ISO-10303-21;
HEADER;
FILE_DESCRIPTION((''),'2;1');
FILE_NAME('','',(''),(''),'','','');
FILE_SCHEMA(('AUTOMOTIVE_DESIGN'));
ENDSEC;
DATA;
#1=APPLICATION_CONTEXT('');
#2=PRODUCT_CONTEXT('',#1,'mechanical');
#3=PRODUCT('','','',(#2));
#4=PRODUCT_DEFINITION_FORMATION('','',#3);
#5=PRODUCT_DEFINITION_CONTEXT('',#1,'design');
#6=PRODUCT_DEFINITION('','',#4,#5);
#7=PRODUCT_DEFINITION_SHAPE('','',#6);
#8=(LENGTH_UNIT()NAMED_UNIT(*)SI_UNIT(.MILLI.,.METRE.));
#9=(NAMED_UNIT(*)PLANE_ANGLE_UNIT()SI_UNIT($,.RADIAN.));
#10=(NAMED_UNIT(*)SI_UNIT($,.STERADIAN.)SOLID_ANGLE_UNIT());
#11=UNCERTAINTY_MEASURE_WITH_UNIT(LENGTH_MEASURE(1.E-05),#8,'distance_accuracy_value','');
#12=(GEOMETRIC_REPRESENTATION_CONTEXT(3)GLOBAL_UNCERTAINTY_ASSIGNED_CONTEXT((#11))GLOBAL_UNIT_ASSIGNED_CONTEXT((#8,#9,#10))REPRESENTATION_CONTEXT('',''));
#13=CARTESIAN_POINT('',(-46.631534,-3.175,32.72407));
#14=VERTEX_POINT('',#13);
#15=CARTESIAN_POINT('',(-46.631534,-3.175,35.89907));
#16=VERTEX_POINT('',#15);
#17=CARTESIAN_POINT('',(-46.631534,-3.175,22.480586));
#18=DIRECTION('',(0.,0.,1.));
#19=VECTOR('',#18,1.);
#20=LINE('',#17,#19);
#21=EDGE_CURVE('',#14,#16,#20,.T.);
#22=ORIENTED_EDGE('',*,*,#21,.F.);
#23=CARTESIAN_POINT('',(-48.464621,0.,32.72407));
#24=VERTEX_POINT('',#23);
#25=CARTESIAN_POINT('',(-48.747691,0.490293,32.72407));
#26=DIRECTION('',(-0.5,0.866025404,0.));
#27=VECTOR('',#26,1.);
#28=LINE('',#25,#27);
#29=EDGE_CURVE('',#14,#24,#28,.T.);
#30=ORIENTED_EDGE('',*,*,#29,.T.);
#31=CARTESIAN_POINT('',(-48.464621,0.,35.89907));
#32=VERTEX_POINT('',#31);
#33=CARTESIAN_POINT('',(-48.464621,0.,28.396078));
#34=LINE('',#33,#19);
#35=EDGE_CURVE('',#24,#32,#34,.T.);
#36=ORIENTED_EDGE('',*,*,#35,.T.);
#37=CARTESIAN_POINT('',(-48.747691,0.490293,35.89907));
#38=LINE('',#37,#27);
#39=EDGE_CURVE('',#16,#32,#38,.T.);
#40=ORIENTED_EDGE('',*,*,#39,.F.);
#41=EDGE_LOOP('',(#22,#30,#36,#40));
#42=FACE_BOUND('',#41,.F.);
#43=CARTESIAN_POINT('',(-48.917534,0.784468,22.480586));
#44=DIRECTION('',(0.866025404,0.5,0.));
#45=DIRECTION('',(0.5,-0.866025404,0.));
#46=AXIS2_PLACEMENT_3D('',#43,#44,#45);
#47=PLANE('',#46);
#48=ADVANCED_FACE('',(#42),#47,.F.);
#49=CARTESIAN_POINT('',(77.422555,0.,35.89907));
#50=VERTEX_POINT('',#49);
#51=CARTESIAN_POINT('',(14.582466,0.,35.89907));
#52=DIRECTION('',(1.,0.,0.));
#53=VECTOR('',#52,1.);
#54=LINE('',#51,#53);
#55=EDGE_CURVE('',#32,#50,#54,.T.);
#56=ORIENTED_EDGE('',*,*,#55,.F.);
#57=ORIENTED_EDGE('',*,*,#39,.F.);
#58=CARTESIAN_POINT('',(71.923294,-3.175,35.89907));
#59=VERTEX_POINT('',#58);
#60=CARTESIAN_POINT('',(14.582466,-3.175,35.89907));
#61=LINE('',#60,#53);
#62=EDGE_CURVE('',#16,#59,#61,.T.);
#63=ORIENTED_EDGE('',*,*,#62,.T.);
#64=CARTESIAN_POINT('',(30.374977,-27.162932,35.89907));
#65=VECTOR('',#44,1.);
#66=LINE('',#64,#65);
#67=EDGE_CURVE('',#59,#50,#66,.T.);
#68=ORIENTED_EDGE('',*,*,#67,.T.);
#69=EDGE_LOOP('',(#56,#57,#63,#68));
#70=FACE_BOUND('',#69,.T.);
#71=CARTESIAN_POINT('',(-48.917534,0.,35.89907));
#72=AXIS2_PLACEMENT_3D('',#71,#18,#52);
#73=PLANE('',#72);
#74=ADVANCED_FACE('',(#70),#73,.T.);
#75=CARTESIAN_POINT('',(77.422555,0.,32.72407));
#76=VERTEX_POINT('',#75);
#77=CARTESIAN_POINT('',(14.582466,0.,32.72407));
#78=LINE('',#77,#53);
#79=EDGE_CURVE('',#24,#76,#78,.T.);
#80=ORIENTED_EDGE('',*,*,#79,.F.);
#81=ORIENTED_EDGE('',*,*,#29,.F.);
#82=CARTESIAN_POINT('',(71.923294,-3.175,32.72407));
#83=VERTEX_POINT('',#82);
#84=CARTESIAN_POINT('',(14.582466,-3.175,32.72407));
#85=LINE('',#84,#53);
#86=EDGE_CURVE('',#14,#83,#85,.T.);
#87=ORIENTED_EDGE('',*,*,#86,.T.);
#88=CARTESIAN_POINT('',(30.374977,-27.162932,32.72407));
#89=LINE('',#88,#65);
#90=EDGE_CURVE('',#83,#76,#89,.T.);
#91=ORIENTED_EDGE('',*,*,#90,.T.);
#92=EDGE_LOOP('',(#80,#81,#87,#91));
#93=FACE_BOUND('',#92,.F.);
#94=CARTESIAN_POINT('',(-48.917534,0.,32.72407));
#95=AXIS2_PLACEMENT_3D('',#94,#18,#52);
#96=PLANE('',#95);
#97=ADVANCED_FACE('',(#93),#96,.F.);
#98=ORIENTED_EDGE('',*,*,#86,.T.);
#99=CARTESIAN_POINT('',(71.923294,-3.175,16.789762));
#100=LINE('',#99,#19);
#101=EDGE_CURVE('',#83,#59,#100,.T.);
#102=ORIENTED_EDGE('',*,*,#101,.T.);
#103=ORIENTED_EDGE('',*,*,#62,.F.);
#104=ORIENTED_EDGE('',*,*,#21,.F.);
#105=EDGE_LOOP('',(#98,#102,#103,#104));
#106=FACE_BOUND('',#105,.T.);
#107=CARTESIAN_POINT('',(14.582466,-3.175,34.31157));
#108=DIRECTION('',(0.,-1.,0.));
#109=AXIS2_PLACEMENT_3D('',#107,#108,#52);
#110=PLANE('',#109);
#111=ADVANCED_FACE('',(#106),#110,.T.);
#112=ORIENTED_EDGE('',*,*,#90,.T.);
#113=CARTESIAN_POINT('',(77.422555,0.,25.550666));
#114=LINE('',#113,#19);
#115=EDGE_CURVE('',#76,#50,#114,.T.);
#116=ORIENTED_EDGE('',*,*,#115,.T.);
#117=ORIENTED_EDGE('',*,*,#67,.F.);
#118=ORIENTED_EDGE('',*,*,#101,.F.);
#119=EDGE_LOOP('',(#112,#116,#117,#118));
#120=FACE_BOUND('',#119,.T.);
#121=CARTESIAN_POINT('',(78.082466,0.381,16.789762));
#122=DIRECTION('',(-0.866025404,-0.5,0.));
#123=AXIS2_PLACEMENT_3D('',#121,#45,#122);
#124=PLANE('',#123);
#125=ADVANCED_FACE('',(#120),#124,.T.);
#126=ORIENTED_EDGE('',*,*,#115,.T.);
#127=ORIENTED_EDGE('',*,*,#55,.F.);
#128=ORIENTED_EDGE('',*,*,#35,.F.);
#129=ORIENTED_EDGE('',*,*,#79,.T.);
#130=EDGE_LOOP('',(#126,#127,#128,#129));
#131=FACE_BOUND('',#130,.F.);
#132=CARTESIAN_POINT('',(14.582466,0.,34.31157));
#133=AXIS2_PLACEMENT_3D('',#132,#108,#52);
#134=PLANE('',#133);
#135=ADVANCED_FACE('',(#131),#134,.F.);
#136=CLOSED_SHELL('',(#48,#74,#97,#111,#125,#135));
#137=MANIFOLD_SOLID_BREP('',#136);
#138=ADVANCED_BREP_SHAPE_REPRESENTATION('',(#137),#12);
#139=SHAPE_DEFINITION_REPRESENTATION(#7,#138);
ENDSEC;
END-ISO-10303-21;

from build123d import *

# Parameters (mm, degrees)
F0_W        = 127
F0_H        = 3.175
F1_DEPTH    = 3.175
F2_T1_DEPTH = 23.6619672735
F3_T1_DEPTH = 35.0436157588


# Not quite as in the source:
# - a fillet or chamfer that OpenCascade refuses, or shapes differently, is made with other operations: its cross-section is extruded or revolved along the edge and cut away or added


with BuildPart() as f1:
    # F0 (on Front) → F1 (new body)
    with BuildSketch(Plane.XZ):
        with Locations((14.5824663341, 34.311569615)):
            Rectangle(F0_W, F0_H)
    extrude(amount=F1_DEPTH)

    # F2: chamfer of 2.286 x 3.9594681461 on 1 edges, made by hand

    # F2_s2 → F2_t1 (cut)
    with BuildSketch(Plane.XY.offset(22.4805859783)):
        Polygon((-48.9175336659, 0.7844681461), (-46.6315336659, -3.175), (-48.9175336659, -3.175), align=None)
    extrude(amount=F2_T1_DEPTH, mode=Mode.SUBTRACT)

    # F3: chamfer of 3.556 x 6.1591726717 on 1 edges, made by hand

    # F3_s2 → F3_t1 (cut)
    with BuildSketch(Plane.XY.offset(16.7897617356)):
        Polygon((78.0824663341, 0.381), (71.9232936624, -3.175), (78.0824663341, -3.175), align=None)
    extrude(amount=F3_T1_DEPTH, mode=Mode.SUBTRACT)


solid = f1.part
